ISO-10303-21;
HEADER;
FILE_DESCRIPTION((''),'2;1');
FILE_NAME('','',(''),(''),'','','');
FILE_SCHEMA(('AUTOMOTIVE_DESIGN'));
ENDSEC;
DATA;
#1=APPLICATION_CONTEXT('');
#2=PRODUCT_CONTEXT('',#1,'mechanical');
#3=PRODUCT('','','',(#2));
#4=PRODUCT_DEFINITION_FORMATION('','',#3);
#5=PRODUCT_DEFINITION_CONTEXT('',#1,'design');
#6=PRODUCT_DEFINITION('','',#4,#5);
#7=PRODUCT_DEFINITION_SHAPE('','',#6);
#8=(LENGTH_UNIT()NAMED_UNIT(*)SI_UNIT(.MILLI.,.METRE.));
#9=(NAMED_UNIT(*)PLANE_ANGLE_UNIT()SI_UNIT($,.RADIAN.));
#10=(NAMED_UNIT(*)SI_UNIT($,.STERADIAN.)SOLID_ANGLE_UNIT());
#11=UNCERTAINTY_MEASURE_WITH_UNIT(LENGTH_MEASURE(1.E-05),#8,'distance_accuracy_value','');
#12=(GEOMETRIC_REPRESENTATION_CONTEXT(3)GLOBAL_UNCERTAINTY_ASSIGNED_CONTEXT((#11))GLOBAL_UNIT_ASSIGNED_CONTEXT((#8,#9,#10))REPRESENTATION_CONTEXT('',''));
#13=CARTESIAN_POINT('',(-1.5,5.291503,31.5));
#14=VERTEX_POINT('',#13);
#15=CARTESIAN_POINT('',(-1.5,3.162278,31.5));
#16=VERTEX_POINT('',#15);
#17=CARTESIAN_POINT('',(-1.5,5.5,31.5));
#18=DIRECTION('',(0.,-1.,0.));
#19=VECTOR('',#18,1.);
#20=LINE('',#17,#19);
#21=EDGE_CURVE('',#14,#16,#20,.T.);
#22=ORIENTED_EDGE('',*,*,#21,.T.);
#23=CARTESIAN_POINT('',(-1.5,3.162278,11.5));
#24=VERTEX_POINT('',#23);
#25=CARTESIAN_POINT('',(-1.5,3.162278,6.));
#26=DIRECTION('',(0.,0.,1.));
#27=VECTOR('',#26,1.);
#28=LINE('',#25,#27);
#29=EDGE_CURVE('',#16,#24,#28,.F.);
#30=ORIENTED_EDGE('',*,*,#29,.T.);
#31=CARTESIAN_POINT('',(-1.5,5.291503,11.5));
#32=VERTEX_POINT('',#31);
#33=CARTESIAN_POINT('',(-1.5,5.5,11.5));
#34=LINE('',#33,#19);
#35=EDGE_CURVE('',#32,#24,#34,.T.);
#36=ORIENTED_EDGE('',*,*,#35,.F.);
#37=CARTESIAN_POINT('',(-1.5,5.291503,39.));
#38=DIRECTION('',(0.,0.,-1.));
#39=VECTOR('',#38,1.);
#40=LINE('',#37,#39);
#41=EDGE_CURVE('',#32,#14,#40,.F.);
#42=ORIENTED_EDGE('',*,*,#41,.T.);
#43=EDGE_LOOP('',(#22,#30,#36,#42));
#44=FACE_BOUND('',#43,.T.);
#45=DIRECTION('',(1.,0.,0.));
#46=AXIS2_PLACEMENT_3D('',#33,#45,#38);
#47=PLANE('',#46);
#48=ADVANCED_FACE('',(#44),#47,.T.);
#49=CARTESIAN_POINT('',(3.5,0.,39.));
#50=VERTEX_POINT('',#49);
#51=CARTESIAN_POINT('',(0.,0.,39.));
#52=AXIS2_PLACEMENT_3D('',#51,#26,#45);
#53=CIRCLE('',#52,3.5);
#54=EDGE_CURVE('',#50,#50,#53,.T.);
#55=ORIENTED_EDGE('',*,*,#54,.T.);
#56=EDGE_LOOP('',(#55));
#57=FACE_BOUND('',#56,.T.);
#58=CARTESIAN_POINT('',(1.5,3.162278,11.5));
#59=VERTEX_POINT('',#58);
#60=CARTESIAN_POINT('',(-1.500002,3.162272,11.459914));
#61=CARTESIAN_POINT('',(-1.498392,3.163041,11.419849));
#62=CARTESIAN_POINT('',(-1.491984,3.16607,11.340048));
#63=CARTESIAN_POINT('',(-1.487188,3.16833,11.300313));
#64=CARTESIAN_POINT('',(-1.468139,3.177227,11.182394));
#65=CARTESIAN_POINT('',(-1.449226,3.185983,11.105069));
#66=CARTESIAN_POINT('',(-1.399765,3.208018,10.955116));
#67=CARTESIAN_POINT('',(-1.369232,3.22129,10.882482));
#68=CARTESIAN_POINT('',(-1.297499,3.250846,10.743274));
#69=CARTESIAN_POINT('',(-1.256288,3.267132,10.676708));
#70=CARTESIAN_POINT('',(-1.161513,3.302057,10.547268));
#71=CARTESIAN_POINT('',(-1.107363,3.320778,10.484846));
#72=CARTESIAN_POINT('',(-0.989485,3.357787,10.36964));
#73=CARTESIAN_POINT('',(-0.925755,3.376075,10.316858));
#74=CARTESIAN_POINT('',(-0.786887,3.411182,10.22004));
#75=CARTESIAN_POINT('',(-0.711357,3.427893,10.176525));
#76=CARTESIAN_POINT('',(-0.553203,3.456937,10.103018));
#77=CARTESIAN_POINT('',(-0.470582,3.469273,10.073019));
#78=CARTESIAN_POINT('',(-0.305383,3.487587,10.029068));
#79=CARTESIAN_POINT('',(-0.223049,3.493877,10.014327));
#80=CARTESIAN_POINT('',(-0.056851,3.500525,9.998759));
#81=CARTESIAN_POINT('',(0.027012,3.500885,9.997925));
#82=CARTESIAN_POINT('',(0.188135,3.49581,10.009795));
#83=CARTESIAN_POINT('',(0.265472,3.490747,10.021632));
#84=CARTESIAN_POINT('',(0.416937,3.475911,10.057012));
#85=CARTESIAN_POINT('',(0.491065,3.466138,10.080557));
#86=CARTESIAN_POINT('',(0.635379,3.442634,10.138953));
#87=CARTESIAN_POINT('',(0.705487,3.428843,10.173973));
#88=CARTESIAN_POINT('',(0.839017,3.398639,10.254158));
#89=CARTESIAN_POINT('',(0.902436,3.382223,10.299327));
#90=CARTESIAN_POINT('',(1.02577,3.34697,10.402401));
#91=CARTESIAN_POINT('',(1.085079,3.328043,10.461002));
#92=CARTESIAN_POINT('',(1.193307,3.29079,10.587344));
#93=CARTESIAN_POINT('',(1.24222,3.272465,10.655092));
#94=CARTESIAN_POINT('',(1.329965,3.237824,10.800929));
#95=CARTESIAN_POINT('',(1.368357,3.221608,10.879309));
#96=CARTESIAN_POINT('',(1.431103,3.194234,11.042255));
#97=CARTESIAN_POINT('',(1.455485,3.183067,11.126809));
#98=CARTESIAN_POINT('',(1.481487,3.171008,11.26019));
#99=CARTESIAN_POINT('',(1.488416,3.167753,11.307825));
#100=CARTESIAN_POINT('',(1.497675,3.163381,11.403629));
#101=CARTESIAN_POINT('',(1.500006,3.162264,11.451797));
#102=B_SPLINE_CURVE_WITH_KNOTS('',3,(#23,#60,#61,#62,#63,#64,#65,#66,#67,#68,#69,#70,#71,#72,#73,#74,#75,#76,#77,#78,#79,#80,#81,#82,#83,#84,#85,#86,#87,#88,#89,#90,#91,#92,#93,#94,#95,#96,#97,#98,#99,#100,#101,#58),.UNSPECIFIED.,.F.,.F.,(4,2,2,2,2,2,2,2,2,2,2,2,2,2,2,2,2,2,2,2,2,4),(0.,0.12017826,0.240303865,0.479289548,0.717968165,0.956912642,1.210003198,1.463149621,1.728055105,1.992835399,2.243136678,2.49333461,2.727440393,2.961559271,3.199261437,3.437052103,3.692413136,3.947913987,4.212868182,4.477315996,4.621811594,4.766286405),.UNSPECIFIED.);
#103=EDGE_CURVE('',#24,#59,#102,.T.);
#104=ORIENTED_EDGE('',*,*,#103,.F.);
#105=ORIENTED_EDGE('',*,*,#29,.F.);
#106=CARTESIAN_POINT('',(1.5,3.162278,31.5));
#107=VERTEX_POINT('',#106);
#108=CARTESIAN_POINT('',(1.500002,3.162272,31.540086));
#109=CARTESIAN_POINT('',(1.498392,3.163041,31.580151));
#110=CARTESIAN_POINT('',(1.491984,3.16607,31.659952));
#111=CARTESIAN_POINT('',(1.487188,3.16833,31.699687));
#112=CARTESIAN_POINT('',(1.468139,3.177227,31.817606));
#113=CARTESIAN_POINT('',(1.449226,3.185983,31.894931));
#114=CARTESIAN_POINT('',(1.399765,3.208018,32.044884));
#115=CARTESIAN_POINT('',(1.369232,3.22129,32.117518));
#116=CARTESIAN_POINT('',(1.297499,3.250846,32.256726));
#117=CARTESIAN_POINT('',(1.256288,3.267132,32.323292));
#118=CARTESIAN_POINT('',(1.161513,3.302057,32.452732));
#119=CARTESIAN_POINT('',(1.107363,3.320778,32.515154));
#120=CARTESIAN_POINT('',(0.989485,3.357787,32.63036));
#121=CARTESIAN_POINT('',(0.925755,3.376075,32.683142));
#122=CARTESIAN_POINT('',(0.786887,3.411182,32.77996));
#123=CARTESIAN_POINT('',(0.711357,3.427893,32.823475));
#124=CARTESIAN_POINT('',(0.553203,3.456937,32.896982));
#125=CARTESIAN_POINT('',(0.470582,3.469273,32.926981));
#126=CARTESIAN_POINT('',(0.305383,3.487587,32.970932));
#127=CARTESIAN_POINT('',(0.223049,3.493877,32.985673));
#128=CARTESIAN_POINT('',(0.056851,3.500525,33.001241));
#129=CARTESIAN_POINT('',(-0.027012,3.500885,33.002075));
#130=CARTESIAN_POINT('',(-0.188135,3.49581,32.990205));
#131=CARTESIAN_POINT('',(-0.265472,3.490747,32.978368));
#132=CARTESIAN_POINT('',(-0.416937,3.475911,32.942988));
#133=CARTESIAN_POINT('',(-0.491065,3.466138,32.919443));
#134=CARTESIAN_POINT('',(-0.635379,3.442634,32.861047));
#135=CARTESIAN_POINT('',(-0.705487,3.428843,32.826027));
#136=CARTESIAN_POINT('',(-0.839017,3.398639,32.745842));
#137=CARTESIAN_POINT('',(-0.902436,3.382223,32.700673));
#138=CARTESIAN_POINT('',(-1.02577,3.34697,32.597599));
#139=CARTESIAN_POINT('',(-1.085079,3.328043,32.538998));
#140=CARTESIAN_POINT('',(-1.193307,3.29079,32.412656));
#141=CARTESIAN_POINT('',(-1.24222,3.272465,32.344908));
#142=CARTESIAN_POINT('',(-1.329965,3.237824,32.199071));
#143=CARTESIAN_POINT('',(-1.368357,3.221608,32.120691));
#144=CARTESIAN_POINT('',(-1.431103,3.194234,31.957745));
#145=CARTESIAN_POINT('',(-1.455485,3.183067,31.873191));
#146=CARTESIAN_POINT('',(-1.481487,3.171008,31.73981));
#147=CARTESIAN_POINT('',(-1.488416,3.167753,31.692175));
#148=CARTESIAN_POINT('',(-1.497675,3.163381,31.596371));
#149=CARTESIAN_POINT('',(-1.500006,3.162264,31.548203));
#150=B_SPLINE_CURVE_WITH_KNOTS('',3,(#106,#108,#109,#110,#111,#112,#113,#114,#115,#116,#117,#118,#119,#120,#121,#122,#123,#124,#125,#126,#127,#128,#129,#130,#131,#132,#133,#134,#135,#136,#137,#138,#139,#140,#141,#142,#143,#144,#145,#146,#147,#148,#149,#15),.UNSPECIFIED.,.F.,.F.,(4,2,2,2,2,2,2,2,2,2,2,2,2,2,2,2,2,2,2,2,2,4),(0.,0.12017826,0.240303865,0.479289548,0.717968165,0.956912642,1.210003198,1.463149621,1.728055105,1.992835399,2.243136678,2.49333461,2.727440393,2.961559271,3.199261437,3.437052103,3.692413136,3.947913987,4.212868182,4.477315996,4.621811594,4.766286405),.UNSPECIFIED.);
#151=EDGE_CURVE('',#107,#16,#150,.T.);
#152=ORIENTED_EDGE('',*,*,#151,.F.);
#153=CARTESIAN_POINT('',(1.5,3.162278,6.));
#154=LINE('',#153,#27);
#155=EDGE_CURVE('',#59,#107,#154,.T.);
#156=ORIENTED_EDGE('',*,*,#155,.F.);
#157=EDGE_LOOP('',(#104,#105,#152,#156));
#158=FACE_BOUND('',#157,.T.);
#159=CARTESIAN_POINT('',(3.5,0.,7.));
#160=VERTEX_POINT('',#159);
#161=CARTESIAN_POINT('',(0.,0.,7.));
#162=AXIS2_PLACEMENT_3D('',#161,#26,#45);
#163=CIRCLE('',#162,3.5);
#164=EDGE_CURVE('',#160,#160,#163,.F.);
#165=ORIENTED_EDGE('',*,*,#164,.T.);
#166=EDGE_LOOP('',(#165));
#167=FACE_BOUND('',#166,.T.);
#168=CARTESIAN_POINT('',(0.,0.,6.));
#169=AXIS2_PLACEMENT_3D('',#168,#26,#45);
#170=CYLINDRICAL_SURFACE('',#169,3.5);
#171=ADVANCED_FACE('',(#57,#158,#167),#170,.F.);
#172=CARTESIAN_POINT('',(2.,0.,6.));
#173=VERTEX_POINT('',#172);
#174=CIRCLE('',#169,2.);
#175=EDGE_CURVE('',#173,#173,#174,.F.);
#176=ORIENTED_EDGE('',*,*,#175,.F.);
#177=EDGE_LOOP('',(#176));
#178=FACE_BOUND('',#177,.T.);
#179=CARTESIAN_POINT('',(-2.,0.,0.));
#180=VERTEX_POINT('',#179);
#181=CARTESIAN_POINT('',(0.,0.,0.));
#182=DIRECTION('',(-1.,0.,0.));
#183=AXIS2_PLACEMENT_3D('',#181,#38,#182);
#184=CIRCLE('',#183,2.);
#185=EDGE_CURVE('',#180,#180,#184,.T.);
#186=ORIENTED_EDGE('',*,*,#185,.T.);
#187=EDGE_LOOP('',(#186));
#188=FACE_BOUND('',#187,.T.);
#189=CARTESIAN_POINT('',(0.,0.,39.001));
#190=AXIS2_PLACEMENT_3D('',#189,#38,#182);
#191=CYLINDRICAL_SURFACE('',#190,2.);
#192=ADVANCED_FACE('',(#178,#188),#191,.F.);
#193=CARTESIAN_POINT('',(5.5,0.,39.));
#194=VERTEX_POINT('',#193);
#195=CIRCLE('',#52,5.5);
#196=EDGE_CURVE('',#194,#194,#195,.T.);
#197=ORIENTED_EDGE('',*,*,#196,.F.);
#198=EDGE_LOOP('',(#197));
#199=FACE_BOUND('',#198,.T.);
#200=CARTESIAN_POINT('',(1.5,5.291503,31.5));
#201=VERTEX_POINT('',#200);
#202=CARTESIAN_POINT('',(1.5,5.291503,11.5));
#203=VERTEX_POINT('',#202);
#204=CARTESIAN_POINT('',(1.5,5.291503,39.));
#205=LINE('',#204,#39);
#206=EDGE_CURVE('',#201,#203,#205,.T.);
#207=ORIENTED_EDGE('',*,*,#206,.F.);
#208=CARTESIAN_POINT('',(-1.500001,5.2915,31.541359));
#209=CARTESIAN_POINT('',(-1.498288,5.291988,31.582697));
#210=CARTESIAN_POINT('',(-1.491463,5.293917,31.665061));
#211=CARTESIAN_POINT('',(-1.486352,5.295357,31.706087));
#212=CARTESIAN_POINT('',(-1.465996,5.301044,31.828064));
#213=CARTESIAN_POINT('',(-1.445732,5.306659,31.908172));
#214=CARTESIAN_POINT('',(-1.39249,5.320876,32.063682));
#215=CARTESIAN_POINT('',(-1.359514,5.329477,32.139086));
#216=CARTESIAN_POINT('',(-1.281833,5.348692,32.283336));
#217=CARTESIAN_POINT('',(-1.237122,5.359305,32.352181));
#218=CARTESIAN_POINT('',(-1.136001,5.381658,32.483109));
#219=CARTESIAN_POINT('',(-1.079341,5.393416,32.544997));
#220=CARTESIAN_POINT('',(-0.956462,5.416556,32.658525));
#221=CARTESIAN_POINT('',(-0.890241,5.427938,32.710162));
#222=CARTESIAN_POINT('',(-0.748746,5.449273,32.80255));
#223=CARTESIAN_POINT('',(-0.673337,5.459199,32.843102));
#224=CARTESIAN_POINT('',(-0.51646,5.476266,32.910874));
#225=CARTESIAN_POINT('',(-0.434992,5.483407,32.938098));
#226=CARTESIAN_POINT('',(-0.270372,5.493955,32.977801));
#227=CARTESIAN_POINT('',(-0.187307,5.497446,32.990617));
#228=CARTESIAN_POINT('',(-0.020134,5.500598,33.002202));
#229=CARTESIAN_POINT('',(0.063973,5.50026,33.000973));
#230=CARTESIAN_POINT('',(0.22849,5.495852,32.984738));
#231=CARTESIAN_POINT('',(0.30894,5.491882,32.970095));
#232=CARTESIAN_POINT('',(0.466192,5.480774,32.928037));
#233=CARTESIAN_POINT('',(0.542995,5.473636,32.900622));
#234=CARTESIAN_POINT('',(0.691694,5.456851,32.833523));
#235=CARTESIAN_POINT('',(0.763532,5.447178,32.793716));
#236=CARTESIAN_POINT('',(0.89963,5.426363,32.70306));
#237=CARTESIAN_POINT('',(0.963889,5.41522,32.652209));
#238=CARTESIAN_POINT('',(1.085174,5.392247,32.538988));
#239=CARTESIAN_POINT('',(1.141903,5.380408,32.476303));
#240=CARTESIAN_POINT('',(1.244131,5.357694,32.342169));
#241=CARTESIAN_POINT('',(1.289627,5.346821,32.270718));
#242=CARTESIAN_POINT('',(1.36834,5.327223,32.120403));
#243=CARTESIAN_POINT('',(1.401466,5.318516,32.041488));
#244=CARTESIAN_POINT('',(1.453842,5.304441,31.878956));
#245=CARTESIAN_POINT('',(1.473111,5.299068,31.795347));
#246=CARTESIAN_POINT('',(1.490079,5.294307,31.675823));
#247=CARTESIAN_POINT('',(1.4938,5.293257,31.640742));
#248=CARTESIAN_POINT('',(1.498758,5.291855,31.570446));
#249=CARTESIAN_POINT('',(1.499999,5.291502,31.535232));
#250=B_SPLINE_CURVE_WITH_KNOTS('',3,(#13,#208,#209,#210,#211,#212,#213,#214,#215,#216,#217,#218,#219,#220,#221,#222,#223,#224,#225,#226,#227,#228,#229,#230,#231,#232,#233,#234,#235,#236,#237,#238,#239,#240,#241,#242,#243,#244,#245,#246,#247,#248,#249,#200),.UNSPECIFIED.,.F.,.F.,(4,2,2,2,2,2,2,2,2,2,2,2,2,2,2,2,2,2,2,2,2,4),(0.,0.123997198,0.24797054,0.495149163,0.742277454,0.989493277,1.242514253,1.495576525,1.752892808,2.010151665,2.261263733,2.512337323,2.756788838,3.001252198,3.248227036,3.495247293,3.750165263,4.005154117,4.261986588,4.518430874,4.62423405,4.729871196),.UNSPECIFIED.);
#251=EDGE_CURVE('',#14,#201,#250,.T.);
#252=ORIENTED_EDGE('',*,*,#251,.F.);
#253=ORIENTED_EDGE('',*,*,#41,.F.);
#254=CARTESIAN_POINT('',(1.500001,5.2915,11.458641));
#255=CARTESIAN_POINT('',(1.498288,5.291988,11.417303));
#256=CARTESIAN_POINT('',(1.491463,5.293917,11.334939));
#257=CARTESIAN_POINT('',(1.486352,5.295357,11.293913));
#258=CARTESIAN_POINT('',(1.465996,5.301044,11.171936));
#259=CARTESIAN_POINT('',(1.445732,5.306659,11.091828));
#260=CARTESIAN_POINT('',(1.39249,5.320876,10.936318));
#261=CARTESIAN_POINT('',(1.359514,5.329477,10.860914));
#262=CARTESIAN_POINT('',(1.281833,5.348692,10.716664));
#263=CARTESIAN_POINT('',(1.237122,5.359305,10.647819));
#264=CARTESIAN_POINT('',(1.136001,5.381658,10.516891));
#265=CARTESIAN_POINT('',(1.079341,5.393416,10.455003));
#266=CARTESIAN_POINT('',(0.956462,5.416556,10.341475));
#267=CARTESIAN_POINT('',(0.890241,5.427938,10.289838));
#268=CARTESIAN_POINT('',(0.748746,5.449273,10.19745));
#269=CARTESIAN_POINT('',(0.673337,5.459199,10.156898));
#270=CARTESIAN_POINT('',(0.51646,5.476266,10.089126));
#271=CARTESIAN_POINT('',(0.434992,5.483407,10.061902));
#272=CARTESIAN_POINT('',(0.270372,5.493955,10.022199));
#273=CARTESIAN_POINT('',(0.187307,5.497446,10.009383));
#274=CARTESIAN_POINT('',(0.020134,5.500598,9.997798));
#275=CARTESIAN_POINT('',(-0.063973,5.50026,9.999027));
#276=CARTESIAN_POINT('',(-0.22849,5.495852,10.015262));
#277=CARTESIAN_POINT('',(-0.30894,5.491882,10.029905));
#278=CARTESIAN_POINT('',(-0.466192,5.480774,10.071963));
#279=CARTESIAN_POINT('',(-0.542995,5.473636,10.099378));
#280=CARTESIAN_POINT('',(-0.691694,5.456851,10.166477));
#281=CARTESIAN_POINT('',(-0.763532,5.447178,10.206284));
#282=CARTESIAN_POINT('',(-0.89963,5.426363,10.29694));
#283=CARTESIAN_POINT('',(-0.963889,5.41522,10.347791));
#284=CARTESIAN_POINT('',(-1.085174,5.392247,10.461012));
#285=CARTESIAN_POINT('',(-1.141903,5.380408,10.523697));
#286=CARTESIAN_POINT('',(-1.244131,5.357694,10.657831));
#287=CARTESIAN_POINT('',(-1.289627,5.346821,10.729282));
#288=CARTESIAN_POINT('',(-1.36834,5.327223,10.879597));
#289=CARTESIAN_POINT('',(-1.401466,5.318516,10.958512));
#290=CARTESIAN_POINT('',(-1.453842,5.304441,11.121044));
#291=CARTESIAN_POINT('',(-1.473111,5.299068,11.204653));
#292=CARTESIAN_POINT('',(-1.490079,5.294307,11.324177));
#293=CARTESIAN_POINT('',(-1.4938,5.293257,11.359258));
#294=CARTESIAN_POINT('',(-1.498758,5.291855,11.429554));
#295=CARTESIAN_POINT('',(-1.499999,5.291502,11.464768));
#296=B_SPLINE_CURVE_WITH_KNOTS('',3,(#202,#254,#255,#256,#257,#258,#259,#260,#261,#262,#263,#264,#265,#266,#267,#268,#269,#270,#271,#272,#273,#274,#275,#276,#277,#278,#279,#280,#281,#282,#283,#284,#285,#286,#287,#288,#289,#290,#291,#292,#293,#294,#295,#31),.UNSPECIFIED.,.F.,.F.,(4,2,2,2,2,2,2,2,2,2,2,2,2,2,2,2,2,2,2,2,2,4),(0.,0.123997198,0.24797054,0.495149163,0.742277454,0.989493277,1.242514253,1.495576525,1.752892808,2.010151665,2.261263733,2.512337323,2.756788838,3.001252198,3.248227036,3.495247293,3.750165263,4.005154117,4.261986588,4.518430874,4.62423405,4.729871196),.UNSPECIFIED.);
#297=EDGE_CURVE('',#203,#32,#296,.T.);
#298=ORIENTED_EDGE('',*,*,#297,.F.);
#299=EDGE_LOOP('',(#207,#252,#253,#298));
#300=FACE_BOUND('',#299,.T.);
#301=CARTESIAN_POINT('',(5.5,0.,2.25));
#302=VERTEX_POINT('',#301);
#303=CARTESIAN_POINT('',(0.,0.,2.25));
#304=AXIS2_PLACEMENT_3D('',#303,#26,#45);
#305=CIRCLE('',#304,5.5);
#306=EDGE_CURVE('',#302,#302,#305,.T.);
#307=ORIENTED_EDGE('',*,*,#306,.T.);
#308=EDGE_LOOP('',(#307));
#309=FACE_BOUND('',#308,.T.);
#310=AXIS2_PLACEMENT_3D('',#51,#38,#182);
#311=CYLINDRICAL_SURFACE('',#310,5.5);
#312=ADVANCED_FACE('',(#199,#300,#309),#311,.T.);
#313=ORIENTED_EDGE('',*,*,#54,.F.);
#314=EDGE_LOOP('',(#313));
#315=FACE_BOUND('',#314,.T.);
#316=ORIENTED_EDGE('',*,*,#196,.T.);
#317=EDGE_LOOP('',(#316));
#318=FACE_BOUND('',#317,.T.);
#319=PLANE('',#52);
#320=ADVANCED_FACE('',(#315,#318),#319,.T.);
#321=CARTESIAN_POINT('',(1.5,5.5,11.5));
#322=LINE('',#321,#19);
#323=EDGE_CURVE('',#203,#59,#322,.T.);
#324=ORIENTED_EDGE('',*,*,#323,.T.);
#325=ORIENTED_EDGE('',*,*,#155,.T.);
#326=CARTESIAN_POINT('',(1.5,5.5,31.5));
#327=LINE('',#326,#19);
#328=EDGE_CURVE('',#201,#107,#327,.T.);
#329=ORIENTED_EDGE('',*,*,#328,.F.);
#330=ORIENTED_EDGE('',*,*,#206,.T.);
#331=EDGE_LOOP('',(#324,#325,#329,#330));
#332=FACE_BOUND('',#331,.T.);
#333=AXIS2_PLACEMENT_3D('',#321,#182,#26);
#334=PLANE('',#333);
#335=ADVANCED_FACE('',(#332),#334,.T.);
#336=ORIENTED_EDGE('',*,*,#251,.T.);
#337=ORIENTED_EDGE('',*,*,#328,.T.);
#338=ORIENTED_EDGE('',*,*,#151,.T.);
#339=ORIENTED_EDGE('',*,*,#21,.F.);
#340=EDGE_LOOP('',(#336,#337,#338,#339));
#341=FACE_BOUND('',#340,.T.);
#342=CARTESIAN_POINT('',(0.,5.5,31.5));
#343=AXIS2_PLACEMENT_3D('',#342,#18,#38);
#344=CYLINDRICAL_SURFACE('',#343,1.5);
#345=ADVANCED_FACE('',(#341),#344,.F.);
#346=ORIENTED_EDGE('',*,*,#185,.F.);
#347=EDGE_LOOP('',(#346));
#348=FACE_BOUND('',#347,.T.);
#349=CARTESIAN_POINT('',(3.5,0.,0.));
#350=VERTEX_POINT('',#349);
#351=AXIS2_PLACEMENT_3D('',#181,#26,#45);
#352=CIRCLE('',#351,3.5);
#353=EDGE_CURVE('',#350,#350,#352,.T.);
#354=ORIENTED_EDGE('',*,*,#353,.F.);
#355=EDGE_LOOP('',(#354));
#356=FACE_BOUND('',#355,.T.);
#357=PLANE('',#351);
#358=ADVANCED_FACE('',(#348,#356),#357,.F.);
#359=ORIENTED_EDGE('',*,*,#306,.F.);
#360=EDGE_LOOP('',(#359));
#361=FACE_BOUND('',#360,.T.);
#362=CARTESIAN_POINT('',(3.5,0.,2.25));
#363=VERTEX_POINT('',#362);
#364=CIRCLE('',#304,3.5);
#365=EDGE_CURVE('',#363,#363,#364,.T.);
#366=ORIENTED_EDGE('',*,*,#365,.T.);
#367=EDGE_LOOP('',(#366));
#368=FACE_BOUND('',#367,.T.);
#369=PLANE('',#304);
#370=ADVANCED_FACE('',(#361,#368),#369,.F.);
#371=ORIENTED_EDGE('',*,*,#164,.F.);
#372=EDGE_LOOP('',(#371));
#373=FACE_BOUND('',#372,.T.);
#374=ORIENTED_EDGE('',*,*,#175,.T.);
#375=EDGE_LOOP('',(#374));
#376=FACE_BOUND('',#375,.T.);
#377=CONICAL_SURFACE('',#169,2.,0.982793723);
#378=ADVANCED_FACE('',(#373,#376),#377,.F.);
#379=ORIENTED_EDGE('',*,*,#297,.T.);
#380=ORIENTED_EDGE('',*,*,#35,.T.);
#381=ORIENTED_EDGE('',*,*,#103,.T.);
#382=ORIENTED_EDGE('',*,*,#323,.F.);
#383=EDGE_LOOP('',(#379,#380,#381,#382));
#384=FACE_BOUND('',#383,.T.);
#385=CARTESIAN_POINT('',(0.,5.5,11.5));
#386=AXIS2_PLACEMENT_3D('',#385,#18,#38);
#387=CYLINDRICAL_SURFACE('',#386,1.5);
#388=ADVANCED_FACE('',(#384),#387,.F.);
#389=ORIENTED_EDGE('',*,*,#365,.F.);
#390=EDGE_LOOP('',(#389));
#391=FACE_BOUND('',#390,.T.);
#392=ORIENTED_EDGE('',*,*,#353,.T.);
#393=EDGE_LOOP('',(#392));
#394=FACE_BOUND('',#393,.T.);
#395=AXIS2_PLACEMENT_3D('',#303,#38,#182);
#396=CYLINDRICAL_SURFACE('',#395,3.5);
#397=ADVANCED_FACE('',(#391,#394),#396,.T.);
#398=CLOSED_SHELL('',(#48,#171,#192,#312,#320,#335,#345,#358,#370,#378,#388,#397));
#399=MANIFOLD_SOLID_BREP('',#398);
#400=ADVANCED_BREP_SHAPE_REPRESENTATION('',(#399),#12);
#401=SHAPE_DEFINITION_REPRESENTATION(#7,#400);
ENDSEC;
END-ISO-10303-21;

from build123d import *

# Parameters (mm, degrees)
SKETCH1_R           = 3.5
BOSS_EXTRUDE1_DEPTH = 2.25
SKETCH2_R           = 5.5
BOSS_EXTRUDE2_DEPTH = 36.75
CUT_EXTRUDE1_START  = -33
SKETCH3_R           = 3.5
CUT_EXTRUDE1_DEPTH  = 33
CUT_EXTRUDE2_REACH  = 41.768
SKETCH4_R           = 2
CHAMFER1_SIZE2      = 1.5
CHAMFER1_SIZE       = 1
CUT_EXTRUDE3_DEPTH  = 40.76807765


with BuildPart() as part:
    # Sketch1 → Boss-Extrude1 (new body)
    with BuildSketch(Plane.XY):
        Circle(SKETCH1_R)
    extrude(amount=BOSS_EXTRUDE1_DEPTH)

    # Sketch2 → Boss-Extrude2 (add)
    with BuildSketch(Plane.XY.offset(2.25)):
        Circle(SKETCH2_R)
    extrude(amount=BOSS_EXTRUDE2_DEPTH)

    # Sketch3 → Cut-Extrude1 (cut)
    with BuildSketch(Plane.XY.offset(39).offset(CUT_EXTRUDE1_START)):
        Circle(SKETCH3_R)
    extrude(amount=CUT_EXTRUDE1_DEPTH, mode=Mode.SUBTRACT)

    # Sketch4 → Cut-Extrude2 (cut, up to next)
    with BuildSketch(Plane(origin=(0, 0, 0), x_dir=(-1, 0, 0), z_dir=(0, 0, -1)), mode=Mode.PRIVATE) as cut_extrude2_sk1:
        Circle(SKETCH4_R)
    cut_extrude2_tool1 = extrude(cut_extrude2_sk1.sketch, amount=-CUT_EXTRUDE2_REACH, mode=Mode.PRIVATE) & part.part
    add(cut_extrude2_tool1.solids().sort_by_distance((0, 0, 0))[0], mode=Mode.SUBTRACT)

    # Chamfer1
    chamfer1_edges = [part.edges().sort_by_distance(p)[0] for p in [
        (-3.5, 0, 6),
    ]]
    chamfer1_side = [part.faces().sort_by_distance(p)[0] for p in [
        (-3.5, 0, 6.02),
    ]]
    chamfer(chamfer1_edges, length=CHAMFER1_SIZE - 0.0001, length2=CHAMFER1_SIZE2 - 0.0001, reference=chamfer1_side[0])  # a hair under: the kernel refuses the full size

    # Sketch5 → Cut-Extrude3 (cut, through all)
    with BuildSketch(Plane(origin=(0, 0, 0), x_dir=(1, 0, 0), z_dir=(0, 1, 0))):
        with BuildLine():
            Line((-1.5, -11.5), (-1.5, -31.5))
            ThreePointArc((-1.5, -31.5), (0, -33), (1.5, -31.5))
            Line((1.5, -31.5), (1.5, -11.5))
            ThreePointArc((1.5, -11.5), (0, -10), (-1.5, -11.5))
        make_face()
    extrude(amount=CUT_EXTRUDE3_DEPTH, mode=Mode.SUBTRACT)


solid = part.part
